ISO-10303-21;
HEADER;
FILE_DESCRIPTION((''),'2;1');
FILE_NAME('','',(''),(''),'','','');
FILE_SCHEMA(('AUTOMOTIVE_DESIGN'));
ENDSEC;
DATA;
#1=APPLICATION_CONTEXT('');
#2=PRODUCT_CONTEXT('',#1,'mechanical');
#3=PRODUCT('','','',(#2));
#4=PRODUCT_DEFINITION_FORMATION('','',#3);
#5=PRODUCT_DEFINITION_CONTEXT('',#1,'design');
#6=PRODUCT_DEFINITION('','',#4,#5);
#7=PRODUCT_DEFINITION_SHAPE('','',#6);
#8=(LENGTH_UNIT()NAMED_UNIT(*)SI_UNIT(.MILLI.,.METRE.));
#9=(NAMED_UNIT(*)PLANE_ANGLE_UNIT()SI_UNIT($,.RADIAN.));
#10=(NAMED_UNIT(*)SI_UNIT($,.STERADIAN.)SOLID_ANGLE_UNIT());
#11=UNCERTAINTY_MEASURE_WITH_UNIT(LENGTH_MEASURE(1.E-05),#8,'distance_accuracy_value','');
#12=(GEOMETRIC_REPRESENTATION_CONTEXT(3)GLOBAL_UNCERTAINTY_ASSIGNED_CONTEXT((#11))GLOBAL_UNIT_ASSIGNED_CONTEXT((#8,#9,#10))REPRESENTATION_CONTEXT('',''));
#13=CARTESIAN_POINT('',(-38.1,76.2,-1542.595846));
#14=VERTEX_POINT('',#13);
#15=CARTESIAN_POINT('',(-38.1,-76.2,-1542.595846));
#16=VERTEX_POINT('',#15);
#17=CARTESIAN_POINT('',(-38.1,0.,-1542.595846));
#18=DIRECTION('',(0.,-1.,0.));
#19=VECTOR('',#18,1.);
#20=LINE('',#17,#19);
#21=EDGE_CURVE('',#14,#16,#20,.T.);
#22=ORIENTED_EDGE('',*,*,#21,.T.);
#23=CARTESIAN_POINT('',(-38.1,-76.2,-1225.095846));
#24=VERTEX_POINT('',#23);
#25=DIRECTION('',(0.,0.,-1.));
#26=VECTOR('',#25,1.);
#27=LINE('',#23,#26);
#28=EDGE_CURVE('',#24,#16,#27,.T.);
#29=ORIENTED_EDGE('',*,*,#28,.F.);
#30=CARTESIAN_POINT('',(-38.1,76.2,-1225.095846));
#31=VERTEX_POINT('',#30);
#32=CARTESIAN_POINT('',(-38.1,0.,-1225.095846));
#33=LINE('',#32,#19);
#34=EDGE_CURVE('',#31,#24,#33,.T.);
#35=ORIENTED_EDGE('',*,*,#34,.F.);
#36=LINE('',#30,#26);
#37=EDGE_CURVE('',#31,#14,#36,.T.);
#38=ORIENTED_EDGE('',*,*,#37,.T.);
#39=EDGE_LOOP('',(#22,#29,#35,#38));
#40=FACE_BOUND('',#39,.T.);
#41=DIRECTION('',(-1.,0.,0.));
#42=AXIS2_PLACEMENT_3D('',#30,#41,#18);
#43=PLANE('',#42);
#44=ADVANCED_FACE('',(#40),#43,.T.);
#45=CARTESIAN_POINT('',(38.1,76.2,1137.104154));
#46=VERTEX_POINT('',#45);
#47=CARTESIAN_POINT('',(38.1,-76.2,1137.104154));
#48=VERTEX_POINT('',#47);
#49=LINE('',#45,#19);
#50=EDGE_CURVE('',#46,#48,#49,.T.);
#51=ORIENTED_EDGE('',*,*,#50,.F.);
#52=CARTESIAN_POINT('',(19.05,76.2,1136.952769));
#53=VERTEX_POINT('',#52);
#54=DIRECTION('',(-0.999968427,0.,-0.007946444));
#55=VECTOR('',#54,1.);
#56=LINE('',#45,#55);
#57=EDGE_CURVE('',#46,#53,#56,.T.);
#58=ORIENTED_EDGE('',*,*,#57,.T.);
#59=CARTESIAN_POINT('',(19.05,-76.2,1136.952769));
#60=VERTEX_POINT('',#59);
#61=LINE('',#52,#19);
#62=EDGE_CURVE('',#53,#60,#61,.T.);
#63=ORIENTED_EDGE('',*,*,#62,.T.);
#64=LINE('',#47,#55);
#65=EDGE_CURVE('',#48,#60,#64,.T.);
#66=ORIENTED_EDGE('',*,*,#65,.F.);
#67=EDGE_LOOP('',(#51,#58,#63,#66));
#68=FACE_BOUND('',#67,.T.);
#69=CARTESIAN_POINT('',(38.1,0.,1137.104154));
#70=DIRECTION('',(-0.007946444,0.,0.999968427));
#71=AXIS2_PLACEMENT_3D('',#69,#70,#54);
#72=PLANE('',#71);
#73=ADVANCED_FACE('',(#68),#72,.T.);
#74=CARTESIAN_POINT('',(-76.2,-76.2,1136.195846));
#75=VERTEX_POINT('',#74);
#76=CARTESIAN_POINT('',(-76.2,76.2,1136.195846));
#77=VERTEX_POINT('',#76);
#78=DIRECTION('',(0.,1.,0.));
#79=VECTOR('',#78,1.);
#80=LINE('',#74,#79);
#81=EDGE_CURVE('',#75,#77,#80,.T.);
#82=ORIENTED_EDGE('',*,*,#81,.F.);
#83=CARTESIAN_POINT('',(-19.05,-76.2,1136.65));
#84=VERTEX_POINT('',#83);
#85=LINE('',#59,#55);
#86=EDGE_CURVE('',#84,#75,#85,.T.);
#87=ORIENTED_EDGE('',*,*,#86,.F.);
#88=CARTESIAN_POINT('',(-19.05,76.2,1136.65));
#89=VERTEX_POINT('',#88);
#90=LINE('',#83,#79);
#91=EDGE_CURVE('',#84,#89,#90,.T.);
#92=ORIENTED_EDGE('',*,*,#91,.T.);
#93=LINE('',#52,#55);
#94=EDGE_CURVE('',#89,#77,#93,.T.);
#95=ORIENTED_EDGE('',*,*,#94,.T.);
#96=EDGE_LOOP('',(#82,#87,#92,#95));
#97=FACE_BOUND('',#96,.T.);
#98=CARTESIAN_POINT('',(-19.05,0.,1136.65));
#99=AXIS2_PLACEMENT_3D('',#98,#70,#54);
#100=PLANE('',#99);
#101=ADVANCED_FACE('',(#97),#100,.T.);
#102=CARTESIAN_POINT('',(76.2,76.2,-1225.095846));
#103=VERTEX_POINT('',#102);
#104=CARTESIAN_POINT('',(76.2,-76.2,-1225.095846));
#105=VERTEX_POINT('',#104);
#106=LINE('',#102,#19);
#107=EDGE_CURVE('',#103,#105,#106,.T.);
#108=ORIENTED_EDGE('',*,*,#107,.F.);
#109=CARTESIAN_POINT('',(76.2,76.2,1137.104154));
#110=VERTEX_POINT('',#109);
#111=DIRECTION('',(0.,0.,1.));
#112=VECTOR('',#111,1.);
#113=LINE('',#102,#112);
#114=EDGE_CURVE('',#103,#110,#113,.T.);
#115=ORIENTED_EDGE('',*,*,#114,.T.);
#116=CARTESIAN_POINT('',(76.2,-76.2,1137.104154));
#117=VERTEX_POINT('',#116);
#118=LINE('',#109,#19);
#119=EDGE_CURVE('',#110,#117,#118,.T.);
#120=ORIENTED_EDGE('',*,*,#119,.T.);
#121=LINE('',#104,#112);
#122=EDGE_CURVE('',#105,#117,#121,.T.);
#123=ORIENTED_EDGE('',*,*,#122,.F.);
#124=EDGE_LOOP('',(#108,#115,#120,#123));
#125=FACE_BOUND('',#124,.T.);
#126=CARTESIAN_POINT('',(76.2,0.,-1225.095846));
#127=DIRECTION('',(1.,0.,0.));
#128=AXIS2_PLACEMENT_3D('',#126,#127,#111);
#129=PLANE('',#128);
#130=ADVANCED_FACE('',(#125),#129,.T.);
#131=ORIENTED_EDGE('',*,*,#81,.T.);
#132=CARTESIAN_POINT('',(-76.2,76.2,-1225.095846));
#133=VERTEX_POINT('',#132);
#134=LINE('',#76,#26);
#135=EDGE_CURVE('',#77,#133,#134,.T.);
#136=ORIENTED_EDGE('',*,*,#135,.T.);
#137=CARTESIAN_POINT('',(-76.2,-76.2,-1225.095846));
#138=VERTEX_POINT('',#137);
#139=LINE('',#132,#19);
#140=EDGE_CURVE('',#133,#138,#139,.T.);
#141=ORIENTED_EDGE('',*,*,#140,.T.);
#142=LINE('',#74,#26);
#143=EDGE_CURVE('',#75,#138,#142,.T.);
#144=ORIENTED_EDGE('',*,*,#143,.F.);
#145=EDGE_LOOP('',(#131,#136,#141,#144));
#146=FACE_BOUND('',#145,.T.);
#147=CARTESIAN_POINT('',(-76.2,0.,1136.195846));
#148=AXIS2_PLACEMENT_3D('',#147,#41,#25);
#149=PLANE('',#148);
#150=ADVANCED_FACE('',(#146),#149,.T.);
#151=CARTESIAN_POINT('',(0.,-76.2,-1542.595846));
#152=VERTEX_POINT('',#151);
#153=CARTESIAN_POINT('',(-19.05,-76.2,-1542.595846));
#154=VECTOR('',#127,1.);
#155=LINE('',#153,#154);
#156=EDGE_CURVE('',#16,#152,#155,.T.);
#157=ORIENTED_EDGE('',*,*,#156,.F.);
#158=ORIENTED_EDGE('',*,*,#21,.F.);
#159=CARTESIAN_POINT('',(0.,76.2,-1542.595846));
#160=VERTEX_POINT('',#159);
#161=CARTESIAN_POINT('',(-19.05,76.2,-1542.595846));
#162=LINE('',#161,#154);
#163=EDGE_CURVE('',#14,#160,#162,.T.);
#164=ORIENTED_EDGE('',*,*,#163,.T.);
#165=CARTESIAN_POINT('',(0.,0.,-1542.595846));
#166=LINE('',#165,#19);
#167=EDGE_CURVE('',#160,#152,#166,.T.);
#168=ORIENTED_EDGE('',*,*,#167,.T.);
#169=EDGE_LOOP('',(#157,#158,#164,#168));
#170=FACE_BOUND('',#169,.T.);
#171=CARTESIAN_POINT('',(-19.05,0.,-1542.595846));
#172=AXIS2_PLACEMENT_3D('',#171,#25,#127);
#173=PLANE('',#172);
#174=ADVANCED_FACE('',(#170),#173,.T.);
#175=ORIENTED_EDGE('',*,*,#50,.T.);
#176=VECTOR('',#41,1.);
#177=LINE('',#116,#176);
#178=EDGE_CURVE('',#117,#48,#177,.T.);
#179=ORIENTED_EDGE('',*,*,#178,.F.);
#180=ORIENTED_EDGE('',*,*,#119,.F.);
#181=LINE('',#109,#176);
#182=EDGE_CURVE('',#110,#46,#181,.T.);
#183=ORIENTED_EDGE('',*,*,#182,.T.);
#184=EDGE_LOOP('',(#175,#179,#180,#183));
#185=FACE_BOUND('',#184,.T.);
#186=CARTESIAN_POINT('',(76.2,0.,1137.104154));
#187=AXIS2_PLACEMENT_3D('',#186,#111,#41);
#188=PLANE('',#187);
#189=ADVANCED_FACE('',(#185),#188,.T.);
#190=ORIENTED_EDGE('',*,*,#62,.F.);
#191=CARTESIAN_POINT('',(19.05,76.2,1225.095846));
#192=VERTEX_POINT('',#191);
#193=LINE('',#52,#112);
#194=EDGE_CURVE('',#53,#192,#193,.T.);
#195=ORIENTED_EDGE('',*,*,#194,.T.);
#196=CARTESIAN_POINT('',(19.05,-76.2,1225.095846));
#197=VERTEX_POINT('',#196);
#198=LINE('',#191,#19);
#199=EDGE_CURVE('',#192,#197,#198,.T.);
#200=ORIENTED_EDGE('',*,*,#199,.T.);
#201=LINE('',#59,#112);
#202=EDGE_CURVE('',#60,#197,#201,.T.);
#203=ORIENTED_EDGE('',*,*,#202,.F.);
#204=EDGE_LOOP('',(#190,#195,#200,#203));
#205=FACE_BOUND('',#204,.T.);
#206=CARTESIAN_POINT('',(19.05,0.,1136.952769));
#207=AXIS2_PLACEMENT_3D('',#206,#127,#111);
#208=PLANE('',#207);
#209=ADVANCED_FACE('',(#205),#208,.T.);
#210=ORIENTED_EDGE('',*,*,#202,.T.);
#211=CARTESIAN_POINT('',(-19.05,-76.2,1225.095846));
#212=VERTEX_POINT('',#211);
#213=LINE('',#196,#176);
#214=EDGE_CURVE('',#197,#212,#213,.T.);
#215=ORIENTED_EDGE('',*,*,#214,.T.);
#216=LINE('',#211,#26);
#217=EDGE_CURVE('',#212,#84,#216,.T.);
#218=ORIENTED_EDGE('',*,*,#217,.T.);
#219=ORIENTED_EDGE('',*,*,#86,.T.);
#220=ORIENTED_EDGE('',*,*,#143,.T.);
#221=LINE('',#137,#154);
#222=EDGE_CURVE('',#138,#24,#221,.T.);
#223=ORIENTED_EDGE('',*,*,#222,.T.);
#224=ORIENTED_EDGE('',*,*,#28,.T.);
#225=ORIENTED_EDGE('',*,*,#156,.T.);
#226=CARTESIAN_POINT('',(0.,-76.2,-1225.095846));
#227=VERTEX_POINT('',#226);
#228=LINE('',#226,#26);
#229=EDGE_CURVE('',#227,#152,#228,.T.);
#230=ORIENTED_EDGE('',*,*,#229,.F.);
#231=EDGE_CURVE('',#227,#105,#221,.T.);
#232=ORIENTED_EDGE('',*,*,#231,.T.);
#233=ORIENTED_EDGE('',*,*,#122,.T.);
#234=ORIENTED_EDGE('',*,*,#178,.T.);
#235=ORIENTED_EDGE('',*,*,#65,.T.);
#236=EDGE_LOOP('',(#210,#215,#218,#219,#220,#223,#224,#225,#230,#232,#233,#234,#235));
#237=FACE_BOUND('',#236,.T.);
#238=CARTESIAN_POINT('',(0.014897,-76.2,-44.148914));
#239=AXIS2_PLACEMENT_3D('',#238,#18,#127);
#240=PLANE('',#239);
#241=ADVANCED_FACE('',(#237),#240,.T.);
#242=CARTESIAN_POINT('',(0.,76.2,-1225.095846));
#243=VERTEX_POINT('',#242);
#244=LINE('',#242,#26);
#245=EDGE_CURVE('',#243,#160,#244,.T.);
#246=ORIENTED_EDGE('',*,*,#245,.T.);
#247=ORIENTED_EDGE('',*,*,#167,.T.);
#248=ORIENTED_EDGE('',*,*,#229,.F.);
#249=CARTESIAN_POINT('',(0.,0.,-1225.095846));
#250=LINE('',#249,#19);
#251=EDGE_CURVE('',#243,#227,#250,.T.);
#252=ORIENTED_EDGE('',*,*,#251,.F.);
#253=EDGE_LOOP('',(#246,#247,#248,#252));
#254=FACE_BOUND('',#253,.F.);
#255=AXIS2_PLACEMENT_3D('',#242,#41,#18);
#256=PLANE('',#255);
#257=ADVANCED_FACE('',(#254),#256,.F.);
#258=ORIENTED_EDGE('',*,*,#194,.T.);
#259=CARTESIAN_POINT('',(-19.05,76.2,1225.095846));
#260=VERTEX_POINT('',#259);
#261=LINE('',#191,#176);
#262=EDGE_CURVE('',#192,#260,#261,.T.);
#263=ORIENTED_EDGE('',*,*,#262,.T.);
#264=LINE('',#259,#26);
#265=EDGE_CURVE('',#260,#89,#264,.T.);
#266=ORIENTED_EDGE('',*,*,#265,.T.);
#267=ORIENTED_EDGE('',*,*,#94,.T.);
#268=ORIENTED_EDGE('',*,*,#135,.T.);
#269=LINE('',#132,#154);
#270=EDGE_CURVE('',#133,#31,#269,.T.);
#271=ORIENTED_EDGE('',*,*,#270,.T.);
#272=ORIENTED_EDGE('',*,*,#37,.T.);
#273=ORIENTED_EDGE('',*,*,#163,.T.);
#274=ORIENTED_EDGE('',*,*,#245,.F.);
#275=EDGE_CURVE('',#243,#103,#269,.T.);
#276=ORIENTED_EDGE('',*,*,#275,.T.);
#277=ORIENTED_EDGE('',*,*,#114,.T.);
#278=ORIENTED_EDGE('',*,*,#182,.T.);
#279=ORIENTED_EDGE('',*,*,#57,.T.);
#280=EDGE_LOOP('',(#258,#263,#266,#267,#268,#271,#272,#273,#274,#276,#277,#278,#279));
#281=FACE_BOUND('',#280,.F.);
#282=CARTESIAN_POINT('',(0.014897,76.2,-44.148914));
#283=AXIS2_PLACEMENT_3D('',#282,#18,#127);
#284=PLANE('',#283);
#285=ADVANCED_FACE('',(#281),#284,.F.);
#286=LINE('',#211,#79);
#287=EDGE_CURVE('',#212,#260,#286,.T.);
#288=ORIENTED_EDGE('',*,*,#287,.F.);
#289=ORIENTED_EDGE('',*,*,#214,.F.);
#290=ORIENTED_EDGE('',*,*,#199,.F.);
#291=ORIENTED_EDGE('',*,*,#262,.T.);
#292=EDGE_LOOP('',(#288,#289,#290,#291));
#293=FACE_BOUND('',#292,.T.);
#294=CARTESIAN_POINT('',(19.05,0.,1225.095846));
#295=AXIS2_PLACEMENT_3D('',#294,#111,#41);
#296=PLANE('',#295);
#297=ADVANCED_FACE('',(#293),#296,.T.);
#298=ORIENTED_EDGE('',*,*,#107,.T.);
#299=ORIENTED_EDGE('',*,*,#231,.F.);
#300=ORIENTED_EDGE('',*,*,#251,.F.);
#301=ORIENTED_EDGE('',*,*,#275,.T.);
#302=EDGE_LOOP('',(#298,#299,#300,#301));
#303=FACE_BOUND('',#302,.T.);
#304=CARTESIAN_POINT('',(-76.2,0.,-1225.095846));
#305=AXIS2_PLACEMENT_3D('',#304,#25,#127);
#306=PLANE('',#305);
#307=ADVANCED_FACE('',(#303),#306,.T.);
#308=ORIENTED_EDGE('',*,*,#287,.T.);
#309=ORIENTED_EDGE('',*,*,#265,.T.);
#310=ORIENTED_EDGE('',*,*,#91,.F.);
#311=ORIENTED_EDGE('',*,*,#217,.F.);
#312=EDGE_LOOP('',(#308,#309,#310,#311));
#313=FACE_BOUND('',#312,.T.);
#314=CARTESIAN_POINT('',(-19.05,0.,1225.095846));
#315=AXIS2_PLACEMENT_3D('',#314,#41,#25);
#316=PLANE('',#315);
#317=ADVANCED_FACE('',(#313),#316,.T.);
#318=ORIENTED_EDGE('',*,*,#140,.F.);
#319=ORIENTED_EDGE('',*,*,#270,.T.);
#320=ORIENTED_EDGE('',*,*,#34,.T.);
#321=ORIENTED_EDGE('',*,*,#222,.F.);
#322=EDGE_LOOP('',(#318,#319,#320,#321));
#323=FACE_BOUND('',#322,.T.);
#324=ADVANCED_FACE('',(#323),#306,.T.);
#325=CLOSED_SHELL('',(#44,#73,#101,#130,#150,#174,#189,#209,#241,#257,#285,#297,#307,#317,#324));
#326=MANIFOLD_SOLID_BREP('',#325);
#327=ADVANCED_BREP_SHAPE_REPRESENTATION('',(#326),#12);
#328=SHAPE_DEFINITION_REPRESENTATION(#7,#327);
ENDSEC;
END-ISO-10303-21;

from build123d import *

# Parameters (mm, degrees)
F1_DEPTH = 76.2
F2_W     = 38.1
F2_H     = 152.4
F3_DEPTH = 317.5


# Not quite as in the source:
# - a feature names something its author has since deleted; it is built from what else it names


with BuildPart() as f1:
    # F0 (on Front) → F1 (new body, symmetric)
    with BuildSketch(Plane.XZ):
        Polygon((-19.05, 1136.65), (-76.2, 1136.1958463669), (-76.2, -1225.0958463669), (76.2, -1225.0958463669), (76.2, 1137.1041536331), (38.1, 1137.1041536331), (19.05, 1136.9527690887), (19.05, 1136.65), align=None)
        Polygon((19.05, 1136.9527690887), (-19.05, 1136.65), (19.05, 1136.65), align=None)
        Polygon((19.05, 1225.0958463669), (-19.05, 1225.0958463669), (-19.05, 1136.65), (19.05, 1136.9527690887), align=None)
    extrude(amount=F1_DEPTH, both=True)

    # F2 (on face) → F3 (join)
    with BuildSketch(Plane(origin=(0, 0, -1225.0958463669), x_dir=(1, 0, 0), z_dir=(0, 0, -1))):
        with Locations((-19.05, 0)):
            Rectangle(F2_W, F2_H)
    extrude(amount=F3_DEPTH)


solid = f1.part
